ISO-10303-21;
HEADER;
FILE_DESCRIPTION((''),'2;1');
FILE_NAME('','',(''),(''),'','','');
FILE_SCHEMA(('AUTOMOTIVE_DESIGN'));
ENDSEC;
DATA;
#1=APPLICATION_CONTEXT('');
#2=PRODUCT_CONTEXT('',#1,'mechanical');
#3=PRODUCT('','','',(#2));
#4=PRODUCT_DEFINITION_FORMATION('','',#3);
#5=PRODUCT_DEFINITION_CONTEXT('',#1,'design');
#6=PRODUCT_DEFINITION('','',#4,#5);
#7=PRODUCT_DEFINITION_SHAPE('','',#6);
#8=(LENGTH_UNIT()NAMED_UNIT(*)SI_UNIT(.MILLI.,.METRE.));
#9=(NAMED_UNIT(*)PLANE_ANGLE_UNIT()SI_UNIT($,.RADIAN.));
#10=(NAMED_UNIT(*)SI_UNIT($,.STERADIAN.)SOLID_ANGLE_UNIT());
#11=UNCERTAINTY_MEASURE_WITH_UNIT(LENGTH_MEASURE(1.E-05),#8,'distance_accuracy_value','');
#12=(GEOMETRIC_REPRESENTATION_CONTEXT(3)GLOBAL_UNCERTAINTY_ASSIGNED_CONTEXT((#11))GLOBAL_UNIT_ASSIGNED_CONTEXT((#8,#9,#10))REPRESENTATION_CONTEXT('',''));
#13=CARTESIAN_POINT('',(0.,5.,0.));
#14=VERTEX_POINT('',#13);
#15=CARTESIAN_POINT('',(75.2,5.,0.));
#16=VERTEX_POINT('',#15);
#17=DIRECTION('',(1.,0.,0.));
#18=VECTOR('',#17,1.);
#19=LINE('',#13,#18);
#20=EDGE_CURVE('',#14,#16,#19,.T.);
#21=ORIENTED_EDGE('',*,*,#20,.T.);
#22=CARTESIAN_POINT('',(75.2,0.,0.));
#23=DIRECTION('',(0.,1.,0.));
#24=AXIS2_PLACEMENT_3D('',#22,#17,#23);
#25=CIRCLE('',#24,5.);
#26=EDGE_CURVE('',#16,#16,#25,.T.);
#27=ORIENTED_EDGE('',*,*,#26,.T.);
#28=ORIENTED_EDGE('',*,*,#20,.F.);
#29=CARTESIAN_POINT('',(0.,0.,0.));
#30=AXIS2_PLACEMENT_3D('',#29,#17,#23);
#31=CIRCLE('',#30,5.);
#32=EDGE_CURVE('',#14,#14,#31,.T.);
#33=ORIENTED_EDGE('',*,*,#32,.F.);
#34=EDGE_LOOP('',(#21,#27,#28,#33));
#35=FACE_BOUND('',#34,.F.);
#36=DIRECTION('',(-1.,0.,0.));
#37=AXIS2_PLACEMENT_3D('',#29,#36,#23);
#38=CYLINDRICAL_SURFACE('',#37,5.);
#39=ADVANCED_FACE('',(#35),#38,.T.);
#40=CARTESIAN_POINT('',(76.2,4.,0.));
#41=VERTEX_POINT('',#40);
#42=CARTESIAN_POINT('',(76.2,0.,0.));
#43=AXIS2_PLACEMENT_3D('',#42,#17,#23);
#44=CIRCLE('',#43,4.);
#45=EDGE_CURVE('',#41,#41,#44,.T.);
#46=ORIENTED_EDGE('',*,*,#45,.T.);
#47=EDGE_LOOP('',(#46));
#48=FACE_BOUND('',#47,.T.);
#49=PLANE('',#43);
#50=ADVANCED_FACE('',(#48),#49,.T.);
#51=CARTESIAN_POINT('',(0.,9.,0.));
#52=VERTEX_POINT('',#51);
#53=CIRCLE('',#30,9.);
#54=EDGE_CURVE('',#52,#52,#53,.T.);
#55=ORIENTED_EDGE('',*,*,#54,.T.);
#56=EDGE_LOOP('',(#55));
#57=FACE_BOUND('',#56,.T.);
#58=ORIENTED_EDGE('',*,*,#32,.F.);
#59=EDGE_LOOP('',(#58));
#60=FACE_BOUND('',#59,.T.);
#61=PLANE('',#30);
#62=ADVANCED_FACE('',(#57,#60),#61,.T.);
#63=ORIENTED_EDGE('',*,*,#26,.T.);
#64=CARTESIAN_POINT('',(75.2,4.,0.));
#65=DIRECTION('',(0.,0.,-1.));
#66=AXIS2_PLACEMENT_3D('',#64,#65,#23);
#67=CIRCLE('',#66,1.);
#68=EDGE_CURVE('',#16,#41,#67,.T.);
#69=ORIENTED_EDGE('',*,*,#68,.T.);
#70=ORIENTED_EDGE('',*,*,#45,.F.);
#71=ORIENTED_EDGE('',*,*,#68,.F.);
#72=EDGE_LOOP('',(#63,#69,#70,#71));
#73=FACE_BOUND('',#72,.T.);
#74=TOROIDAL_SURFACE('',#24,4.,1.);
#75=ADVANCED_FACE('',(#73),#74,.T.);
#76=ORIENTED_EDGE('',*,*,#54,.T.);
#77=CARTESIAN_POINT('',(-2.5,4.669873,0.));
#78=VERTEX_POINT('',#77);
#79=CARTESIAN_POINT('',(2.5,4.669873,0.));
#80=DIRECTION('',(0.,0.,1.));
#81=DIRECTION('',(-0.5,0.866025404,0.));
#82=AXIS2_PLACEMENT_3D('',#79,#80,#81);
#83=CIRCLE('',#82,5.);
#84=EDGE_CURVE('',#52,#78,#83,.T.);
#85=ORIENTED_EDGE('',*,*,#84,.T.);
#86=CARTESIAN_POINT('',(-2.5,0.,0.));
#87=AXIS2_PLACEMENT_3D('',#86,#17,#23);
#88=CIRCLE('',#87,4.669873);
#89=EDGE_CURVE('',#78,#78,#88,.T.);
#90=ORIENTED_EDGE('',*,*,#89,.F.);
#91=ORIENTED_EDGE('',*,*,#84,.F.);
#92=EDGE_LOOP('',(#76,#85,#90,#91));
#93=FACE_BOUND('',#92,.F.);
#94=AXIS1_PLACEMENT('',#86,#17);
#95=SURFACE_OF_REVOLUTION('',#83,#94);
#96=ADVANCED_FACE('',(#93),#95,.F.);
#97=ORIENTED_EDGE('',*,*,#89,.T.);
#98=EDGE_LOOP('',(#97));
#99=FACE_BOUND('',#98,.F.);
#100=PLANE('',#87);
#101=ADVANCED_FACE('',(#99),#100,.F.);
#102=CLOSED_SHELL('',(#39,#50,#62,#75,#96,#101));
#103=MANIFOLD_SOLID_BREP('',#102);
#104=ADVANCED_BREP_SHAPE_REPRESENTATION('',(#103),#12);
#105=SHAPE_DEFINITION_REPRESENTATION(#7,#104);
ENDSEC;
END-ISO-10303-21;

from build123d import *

# Parameters (mm, degrees)
F0_R     = 5
F2_DEPTH = 76.2
F1_R     = 9
F3_DEPTH = 2.5
F5_R     = 1


# Not quite as in the source:
# - a fillet or chamfer that OpenCascade refuses, or shapes differently, is made with other operations: its cross-section is extruded or revolved along the edge and cut away or added


with BuildPart() as f2:
    # F0 (on Right) → F2 (new body)
    with BuildSketch(Plane.YZ):
        Circle(F0_R)
    extrude(amount=F2_DEPTH)

    # F1 (on Right) → F3 (join)
    with BuildSketch(Plane.YZ):
        Circle(F1_R)
    extrude(amount=-F3_DEPTH)

    # F4: fillet of radius 5 on 1 edges, made by hand

    # F4_s1 → F4_t2 (revolve, cut)
    with BuildSketch(Plane.XY):
        with BuildLine():
            ThreePointArc((0, 9), (-1.8301270189, 7.1698729811), (-2.5, 4.6698729811))
            Line((-2.5, 4.6698729811), (-2.5, 9))
            Line((-2.5, 9), (0, 9))
        make_face()
    revolve(axis=Axis((-2.5, 0, 0), (1, 0, 0)), mode=Mode.SUBTRACT)

    # F5
    f5_edges = [f2.edges().sort_by_distance(p)[0] for p in [
        (76.2, -5, 0),
    ]]
    fillet(f5_edges, radius=F5_R)


solid = f2.part
